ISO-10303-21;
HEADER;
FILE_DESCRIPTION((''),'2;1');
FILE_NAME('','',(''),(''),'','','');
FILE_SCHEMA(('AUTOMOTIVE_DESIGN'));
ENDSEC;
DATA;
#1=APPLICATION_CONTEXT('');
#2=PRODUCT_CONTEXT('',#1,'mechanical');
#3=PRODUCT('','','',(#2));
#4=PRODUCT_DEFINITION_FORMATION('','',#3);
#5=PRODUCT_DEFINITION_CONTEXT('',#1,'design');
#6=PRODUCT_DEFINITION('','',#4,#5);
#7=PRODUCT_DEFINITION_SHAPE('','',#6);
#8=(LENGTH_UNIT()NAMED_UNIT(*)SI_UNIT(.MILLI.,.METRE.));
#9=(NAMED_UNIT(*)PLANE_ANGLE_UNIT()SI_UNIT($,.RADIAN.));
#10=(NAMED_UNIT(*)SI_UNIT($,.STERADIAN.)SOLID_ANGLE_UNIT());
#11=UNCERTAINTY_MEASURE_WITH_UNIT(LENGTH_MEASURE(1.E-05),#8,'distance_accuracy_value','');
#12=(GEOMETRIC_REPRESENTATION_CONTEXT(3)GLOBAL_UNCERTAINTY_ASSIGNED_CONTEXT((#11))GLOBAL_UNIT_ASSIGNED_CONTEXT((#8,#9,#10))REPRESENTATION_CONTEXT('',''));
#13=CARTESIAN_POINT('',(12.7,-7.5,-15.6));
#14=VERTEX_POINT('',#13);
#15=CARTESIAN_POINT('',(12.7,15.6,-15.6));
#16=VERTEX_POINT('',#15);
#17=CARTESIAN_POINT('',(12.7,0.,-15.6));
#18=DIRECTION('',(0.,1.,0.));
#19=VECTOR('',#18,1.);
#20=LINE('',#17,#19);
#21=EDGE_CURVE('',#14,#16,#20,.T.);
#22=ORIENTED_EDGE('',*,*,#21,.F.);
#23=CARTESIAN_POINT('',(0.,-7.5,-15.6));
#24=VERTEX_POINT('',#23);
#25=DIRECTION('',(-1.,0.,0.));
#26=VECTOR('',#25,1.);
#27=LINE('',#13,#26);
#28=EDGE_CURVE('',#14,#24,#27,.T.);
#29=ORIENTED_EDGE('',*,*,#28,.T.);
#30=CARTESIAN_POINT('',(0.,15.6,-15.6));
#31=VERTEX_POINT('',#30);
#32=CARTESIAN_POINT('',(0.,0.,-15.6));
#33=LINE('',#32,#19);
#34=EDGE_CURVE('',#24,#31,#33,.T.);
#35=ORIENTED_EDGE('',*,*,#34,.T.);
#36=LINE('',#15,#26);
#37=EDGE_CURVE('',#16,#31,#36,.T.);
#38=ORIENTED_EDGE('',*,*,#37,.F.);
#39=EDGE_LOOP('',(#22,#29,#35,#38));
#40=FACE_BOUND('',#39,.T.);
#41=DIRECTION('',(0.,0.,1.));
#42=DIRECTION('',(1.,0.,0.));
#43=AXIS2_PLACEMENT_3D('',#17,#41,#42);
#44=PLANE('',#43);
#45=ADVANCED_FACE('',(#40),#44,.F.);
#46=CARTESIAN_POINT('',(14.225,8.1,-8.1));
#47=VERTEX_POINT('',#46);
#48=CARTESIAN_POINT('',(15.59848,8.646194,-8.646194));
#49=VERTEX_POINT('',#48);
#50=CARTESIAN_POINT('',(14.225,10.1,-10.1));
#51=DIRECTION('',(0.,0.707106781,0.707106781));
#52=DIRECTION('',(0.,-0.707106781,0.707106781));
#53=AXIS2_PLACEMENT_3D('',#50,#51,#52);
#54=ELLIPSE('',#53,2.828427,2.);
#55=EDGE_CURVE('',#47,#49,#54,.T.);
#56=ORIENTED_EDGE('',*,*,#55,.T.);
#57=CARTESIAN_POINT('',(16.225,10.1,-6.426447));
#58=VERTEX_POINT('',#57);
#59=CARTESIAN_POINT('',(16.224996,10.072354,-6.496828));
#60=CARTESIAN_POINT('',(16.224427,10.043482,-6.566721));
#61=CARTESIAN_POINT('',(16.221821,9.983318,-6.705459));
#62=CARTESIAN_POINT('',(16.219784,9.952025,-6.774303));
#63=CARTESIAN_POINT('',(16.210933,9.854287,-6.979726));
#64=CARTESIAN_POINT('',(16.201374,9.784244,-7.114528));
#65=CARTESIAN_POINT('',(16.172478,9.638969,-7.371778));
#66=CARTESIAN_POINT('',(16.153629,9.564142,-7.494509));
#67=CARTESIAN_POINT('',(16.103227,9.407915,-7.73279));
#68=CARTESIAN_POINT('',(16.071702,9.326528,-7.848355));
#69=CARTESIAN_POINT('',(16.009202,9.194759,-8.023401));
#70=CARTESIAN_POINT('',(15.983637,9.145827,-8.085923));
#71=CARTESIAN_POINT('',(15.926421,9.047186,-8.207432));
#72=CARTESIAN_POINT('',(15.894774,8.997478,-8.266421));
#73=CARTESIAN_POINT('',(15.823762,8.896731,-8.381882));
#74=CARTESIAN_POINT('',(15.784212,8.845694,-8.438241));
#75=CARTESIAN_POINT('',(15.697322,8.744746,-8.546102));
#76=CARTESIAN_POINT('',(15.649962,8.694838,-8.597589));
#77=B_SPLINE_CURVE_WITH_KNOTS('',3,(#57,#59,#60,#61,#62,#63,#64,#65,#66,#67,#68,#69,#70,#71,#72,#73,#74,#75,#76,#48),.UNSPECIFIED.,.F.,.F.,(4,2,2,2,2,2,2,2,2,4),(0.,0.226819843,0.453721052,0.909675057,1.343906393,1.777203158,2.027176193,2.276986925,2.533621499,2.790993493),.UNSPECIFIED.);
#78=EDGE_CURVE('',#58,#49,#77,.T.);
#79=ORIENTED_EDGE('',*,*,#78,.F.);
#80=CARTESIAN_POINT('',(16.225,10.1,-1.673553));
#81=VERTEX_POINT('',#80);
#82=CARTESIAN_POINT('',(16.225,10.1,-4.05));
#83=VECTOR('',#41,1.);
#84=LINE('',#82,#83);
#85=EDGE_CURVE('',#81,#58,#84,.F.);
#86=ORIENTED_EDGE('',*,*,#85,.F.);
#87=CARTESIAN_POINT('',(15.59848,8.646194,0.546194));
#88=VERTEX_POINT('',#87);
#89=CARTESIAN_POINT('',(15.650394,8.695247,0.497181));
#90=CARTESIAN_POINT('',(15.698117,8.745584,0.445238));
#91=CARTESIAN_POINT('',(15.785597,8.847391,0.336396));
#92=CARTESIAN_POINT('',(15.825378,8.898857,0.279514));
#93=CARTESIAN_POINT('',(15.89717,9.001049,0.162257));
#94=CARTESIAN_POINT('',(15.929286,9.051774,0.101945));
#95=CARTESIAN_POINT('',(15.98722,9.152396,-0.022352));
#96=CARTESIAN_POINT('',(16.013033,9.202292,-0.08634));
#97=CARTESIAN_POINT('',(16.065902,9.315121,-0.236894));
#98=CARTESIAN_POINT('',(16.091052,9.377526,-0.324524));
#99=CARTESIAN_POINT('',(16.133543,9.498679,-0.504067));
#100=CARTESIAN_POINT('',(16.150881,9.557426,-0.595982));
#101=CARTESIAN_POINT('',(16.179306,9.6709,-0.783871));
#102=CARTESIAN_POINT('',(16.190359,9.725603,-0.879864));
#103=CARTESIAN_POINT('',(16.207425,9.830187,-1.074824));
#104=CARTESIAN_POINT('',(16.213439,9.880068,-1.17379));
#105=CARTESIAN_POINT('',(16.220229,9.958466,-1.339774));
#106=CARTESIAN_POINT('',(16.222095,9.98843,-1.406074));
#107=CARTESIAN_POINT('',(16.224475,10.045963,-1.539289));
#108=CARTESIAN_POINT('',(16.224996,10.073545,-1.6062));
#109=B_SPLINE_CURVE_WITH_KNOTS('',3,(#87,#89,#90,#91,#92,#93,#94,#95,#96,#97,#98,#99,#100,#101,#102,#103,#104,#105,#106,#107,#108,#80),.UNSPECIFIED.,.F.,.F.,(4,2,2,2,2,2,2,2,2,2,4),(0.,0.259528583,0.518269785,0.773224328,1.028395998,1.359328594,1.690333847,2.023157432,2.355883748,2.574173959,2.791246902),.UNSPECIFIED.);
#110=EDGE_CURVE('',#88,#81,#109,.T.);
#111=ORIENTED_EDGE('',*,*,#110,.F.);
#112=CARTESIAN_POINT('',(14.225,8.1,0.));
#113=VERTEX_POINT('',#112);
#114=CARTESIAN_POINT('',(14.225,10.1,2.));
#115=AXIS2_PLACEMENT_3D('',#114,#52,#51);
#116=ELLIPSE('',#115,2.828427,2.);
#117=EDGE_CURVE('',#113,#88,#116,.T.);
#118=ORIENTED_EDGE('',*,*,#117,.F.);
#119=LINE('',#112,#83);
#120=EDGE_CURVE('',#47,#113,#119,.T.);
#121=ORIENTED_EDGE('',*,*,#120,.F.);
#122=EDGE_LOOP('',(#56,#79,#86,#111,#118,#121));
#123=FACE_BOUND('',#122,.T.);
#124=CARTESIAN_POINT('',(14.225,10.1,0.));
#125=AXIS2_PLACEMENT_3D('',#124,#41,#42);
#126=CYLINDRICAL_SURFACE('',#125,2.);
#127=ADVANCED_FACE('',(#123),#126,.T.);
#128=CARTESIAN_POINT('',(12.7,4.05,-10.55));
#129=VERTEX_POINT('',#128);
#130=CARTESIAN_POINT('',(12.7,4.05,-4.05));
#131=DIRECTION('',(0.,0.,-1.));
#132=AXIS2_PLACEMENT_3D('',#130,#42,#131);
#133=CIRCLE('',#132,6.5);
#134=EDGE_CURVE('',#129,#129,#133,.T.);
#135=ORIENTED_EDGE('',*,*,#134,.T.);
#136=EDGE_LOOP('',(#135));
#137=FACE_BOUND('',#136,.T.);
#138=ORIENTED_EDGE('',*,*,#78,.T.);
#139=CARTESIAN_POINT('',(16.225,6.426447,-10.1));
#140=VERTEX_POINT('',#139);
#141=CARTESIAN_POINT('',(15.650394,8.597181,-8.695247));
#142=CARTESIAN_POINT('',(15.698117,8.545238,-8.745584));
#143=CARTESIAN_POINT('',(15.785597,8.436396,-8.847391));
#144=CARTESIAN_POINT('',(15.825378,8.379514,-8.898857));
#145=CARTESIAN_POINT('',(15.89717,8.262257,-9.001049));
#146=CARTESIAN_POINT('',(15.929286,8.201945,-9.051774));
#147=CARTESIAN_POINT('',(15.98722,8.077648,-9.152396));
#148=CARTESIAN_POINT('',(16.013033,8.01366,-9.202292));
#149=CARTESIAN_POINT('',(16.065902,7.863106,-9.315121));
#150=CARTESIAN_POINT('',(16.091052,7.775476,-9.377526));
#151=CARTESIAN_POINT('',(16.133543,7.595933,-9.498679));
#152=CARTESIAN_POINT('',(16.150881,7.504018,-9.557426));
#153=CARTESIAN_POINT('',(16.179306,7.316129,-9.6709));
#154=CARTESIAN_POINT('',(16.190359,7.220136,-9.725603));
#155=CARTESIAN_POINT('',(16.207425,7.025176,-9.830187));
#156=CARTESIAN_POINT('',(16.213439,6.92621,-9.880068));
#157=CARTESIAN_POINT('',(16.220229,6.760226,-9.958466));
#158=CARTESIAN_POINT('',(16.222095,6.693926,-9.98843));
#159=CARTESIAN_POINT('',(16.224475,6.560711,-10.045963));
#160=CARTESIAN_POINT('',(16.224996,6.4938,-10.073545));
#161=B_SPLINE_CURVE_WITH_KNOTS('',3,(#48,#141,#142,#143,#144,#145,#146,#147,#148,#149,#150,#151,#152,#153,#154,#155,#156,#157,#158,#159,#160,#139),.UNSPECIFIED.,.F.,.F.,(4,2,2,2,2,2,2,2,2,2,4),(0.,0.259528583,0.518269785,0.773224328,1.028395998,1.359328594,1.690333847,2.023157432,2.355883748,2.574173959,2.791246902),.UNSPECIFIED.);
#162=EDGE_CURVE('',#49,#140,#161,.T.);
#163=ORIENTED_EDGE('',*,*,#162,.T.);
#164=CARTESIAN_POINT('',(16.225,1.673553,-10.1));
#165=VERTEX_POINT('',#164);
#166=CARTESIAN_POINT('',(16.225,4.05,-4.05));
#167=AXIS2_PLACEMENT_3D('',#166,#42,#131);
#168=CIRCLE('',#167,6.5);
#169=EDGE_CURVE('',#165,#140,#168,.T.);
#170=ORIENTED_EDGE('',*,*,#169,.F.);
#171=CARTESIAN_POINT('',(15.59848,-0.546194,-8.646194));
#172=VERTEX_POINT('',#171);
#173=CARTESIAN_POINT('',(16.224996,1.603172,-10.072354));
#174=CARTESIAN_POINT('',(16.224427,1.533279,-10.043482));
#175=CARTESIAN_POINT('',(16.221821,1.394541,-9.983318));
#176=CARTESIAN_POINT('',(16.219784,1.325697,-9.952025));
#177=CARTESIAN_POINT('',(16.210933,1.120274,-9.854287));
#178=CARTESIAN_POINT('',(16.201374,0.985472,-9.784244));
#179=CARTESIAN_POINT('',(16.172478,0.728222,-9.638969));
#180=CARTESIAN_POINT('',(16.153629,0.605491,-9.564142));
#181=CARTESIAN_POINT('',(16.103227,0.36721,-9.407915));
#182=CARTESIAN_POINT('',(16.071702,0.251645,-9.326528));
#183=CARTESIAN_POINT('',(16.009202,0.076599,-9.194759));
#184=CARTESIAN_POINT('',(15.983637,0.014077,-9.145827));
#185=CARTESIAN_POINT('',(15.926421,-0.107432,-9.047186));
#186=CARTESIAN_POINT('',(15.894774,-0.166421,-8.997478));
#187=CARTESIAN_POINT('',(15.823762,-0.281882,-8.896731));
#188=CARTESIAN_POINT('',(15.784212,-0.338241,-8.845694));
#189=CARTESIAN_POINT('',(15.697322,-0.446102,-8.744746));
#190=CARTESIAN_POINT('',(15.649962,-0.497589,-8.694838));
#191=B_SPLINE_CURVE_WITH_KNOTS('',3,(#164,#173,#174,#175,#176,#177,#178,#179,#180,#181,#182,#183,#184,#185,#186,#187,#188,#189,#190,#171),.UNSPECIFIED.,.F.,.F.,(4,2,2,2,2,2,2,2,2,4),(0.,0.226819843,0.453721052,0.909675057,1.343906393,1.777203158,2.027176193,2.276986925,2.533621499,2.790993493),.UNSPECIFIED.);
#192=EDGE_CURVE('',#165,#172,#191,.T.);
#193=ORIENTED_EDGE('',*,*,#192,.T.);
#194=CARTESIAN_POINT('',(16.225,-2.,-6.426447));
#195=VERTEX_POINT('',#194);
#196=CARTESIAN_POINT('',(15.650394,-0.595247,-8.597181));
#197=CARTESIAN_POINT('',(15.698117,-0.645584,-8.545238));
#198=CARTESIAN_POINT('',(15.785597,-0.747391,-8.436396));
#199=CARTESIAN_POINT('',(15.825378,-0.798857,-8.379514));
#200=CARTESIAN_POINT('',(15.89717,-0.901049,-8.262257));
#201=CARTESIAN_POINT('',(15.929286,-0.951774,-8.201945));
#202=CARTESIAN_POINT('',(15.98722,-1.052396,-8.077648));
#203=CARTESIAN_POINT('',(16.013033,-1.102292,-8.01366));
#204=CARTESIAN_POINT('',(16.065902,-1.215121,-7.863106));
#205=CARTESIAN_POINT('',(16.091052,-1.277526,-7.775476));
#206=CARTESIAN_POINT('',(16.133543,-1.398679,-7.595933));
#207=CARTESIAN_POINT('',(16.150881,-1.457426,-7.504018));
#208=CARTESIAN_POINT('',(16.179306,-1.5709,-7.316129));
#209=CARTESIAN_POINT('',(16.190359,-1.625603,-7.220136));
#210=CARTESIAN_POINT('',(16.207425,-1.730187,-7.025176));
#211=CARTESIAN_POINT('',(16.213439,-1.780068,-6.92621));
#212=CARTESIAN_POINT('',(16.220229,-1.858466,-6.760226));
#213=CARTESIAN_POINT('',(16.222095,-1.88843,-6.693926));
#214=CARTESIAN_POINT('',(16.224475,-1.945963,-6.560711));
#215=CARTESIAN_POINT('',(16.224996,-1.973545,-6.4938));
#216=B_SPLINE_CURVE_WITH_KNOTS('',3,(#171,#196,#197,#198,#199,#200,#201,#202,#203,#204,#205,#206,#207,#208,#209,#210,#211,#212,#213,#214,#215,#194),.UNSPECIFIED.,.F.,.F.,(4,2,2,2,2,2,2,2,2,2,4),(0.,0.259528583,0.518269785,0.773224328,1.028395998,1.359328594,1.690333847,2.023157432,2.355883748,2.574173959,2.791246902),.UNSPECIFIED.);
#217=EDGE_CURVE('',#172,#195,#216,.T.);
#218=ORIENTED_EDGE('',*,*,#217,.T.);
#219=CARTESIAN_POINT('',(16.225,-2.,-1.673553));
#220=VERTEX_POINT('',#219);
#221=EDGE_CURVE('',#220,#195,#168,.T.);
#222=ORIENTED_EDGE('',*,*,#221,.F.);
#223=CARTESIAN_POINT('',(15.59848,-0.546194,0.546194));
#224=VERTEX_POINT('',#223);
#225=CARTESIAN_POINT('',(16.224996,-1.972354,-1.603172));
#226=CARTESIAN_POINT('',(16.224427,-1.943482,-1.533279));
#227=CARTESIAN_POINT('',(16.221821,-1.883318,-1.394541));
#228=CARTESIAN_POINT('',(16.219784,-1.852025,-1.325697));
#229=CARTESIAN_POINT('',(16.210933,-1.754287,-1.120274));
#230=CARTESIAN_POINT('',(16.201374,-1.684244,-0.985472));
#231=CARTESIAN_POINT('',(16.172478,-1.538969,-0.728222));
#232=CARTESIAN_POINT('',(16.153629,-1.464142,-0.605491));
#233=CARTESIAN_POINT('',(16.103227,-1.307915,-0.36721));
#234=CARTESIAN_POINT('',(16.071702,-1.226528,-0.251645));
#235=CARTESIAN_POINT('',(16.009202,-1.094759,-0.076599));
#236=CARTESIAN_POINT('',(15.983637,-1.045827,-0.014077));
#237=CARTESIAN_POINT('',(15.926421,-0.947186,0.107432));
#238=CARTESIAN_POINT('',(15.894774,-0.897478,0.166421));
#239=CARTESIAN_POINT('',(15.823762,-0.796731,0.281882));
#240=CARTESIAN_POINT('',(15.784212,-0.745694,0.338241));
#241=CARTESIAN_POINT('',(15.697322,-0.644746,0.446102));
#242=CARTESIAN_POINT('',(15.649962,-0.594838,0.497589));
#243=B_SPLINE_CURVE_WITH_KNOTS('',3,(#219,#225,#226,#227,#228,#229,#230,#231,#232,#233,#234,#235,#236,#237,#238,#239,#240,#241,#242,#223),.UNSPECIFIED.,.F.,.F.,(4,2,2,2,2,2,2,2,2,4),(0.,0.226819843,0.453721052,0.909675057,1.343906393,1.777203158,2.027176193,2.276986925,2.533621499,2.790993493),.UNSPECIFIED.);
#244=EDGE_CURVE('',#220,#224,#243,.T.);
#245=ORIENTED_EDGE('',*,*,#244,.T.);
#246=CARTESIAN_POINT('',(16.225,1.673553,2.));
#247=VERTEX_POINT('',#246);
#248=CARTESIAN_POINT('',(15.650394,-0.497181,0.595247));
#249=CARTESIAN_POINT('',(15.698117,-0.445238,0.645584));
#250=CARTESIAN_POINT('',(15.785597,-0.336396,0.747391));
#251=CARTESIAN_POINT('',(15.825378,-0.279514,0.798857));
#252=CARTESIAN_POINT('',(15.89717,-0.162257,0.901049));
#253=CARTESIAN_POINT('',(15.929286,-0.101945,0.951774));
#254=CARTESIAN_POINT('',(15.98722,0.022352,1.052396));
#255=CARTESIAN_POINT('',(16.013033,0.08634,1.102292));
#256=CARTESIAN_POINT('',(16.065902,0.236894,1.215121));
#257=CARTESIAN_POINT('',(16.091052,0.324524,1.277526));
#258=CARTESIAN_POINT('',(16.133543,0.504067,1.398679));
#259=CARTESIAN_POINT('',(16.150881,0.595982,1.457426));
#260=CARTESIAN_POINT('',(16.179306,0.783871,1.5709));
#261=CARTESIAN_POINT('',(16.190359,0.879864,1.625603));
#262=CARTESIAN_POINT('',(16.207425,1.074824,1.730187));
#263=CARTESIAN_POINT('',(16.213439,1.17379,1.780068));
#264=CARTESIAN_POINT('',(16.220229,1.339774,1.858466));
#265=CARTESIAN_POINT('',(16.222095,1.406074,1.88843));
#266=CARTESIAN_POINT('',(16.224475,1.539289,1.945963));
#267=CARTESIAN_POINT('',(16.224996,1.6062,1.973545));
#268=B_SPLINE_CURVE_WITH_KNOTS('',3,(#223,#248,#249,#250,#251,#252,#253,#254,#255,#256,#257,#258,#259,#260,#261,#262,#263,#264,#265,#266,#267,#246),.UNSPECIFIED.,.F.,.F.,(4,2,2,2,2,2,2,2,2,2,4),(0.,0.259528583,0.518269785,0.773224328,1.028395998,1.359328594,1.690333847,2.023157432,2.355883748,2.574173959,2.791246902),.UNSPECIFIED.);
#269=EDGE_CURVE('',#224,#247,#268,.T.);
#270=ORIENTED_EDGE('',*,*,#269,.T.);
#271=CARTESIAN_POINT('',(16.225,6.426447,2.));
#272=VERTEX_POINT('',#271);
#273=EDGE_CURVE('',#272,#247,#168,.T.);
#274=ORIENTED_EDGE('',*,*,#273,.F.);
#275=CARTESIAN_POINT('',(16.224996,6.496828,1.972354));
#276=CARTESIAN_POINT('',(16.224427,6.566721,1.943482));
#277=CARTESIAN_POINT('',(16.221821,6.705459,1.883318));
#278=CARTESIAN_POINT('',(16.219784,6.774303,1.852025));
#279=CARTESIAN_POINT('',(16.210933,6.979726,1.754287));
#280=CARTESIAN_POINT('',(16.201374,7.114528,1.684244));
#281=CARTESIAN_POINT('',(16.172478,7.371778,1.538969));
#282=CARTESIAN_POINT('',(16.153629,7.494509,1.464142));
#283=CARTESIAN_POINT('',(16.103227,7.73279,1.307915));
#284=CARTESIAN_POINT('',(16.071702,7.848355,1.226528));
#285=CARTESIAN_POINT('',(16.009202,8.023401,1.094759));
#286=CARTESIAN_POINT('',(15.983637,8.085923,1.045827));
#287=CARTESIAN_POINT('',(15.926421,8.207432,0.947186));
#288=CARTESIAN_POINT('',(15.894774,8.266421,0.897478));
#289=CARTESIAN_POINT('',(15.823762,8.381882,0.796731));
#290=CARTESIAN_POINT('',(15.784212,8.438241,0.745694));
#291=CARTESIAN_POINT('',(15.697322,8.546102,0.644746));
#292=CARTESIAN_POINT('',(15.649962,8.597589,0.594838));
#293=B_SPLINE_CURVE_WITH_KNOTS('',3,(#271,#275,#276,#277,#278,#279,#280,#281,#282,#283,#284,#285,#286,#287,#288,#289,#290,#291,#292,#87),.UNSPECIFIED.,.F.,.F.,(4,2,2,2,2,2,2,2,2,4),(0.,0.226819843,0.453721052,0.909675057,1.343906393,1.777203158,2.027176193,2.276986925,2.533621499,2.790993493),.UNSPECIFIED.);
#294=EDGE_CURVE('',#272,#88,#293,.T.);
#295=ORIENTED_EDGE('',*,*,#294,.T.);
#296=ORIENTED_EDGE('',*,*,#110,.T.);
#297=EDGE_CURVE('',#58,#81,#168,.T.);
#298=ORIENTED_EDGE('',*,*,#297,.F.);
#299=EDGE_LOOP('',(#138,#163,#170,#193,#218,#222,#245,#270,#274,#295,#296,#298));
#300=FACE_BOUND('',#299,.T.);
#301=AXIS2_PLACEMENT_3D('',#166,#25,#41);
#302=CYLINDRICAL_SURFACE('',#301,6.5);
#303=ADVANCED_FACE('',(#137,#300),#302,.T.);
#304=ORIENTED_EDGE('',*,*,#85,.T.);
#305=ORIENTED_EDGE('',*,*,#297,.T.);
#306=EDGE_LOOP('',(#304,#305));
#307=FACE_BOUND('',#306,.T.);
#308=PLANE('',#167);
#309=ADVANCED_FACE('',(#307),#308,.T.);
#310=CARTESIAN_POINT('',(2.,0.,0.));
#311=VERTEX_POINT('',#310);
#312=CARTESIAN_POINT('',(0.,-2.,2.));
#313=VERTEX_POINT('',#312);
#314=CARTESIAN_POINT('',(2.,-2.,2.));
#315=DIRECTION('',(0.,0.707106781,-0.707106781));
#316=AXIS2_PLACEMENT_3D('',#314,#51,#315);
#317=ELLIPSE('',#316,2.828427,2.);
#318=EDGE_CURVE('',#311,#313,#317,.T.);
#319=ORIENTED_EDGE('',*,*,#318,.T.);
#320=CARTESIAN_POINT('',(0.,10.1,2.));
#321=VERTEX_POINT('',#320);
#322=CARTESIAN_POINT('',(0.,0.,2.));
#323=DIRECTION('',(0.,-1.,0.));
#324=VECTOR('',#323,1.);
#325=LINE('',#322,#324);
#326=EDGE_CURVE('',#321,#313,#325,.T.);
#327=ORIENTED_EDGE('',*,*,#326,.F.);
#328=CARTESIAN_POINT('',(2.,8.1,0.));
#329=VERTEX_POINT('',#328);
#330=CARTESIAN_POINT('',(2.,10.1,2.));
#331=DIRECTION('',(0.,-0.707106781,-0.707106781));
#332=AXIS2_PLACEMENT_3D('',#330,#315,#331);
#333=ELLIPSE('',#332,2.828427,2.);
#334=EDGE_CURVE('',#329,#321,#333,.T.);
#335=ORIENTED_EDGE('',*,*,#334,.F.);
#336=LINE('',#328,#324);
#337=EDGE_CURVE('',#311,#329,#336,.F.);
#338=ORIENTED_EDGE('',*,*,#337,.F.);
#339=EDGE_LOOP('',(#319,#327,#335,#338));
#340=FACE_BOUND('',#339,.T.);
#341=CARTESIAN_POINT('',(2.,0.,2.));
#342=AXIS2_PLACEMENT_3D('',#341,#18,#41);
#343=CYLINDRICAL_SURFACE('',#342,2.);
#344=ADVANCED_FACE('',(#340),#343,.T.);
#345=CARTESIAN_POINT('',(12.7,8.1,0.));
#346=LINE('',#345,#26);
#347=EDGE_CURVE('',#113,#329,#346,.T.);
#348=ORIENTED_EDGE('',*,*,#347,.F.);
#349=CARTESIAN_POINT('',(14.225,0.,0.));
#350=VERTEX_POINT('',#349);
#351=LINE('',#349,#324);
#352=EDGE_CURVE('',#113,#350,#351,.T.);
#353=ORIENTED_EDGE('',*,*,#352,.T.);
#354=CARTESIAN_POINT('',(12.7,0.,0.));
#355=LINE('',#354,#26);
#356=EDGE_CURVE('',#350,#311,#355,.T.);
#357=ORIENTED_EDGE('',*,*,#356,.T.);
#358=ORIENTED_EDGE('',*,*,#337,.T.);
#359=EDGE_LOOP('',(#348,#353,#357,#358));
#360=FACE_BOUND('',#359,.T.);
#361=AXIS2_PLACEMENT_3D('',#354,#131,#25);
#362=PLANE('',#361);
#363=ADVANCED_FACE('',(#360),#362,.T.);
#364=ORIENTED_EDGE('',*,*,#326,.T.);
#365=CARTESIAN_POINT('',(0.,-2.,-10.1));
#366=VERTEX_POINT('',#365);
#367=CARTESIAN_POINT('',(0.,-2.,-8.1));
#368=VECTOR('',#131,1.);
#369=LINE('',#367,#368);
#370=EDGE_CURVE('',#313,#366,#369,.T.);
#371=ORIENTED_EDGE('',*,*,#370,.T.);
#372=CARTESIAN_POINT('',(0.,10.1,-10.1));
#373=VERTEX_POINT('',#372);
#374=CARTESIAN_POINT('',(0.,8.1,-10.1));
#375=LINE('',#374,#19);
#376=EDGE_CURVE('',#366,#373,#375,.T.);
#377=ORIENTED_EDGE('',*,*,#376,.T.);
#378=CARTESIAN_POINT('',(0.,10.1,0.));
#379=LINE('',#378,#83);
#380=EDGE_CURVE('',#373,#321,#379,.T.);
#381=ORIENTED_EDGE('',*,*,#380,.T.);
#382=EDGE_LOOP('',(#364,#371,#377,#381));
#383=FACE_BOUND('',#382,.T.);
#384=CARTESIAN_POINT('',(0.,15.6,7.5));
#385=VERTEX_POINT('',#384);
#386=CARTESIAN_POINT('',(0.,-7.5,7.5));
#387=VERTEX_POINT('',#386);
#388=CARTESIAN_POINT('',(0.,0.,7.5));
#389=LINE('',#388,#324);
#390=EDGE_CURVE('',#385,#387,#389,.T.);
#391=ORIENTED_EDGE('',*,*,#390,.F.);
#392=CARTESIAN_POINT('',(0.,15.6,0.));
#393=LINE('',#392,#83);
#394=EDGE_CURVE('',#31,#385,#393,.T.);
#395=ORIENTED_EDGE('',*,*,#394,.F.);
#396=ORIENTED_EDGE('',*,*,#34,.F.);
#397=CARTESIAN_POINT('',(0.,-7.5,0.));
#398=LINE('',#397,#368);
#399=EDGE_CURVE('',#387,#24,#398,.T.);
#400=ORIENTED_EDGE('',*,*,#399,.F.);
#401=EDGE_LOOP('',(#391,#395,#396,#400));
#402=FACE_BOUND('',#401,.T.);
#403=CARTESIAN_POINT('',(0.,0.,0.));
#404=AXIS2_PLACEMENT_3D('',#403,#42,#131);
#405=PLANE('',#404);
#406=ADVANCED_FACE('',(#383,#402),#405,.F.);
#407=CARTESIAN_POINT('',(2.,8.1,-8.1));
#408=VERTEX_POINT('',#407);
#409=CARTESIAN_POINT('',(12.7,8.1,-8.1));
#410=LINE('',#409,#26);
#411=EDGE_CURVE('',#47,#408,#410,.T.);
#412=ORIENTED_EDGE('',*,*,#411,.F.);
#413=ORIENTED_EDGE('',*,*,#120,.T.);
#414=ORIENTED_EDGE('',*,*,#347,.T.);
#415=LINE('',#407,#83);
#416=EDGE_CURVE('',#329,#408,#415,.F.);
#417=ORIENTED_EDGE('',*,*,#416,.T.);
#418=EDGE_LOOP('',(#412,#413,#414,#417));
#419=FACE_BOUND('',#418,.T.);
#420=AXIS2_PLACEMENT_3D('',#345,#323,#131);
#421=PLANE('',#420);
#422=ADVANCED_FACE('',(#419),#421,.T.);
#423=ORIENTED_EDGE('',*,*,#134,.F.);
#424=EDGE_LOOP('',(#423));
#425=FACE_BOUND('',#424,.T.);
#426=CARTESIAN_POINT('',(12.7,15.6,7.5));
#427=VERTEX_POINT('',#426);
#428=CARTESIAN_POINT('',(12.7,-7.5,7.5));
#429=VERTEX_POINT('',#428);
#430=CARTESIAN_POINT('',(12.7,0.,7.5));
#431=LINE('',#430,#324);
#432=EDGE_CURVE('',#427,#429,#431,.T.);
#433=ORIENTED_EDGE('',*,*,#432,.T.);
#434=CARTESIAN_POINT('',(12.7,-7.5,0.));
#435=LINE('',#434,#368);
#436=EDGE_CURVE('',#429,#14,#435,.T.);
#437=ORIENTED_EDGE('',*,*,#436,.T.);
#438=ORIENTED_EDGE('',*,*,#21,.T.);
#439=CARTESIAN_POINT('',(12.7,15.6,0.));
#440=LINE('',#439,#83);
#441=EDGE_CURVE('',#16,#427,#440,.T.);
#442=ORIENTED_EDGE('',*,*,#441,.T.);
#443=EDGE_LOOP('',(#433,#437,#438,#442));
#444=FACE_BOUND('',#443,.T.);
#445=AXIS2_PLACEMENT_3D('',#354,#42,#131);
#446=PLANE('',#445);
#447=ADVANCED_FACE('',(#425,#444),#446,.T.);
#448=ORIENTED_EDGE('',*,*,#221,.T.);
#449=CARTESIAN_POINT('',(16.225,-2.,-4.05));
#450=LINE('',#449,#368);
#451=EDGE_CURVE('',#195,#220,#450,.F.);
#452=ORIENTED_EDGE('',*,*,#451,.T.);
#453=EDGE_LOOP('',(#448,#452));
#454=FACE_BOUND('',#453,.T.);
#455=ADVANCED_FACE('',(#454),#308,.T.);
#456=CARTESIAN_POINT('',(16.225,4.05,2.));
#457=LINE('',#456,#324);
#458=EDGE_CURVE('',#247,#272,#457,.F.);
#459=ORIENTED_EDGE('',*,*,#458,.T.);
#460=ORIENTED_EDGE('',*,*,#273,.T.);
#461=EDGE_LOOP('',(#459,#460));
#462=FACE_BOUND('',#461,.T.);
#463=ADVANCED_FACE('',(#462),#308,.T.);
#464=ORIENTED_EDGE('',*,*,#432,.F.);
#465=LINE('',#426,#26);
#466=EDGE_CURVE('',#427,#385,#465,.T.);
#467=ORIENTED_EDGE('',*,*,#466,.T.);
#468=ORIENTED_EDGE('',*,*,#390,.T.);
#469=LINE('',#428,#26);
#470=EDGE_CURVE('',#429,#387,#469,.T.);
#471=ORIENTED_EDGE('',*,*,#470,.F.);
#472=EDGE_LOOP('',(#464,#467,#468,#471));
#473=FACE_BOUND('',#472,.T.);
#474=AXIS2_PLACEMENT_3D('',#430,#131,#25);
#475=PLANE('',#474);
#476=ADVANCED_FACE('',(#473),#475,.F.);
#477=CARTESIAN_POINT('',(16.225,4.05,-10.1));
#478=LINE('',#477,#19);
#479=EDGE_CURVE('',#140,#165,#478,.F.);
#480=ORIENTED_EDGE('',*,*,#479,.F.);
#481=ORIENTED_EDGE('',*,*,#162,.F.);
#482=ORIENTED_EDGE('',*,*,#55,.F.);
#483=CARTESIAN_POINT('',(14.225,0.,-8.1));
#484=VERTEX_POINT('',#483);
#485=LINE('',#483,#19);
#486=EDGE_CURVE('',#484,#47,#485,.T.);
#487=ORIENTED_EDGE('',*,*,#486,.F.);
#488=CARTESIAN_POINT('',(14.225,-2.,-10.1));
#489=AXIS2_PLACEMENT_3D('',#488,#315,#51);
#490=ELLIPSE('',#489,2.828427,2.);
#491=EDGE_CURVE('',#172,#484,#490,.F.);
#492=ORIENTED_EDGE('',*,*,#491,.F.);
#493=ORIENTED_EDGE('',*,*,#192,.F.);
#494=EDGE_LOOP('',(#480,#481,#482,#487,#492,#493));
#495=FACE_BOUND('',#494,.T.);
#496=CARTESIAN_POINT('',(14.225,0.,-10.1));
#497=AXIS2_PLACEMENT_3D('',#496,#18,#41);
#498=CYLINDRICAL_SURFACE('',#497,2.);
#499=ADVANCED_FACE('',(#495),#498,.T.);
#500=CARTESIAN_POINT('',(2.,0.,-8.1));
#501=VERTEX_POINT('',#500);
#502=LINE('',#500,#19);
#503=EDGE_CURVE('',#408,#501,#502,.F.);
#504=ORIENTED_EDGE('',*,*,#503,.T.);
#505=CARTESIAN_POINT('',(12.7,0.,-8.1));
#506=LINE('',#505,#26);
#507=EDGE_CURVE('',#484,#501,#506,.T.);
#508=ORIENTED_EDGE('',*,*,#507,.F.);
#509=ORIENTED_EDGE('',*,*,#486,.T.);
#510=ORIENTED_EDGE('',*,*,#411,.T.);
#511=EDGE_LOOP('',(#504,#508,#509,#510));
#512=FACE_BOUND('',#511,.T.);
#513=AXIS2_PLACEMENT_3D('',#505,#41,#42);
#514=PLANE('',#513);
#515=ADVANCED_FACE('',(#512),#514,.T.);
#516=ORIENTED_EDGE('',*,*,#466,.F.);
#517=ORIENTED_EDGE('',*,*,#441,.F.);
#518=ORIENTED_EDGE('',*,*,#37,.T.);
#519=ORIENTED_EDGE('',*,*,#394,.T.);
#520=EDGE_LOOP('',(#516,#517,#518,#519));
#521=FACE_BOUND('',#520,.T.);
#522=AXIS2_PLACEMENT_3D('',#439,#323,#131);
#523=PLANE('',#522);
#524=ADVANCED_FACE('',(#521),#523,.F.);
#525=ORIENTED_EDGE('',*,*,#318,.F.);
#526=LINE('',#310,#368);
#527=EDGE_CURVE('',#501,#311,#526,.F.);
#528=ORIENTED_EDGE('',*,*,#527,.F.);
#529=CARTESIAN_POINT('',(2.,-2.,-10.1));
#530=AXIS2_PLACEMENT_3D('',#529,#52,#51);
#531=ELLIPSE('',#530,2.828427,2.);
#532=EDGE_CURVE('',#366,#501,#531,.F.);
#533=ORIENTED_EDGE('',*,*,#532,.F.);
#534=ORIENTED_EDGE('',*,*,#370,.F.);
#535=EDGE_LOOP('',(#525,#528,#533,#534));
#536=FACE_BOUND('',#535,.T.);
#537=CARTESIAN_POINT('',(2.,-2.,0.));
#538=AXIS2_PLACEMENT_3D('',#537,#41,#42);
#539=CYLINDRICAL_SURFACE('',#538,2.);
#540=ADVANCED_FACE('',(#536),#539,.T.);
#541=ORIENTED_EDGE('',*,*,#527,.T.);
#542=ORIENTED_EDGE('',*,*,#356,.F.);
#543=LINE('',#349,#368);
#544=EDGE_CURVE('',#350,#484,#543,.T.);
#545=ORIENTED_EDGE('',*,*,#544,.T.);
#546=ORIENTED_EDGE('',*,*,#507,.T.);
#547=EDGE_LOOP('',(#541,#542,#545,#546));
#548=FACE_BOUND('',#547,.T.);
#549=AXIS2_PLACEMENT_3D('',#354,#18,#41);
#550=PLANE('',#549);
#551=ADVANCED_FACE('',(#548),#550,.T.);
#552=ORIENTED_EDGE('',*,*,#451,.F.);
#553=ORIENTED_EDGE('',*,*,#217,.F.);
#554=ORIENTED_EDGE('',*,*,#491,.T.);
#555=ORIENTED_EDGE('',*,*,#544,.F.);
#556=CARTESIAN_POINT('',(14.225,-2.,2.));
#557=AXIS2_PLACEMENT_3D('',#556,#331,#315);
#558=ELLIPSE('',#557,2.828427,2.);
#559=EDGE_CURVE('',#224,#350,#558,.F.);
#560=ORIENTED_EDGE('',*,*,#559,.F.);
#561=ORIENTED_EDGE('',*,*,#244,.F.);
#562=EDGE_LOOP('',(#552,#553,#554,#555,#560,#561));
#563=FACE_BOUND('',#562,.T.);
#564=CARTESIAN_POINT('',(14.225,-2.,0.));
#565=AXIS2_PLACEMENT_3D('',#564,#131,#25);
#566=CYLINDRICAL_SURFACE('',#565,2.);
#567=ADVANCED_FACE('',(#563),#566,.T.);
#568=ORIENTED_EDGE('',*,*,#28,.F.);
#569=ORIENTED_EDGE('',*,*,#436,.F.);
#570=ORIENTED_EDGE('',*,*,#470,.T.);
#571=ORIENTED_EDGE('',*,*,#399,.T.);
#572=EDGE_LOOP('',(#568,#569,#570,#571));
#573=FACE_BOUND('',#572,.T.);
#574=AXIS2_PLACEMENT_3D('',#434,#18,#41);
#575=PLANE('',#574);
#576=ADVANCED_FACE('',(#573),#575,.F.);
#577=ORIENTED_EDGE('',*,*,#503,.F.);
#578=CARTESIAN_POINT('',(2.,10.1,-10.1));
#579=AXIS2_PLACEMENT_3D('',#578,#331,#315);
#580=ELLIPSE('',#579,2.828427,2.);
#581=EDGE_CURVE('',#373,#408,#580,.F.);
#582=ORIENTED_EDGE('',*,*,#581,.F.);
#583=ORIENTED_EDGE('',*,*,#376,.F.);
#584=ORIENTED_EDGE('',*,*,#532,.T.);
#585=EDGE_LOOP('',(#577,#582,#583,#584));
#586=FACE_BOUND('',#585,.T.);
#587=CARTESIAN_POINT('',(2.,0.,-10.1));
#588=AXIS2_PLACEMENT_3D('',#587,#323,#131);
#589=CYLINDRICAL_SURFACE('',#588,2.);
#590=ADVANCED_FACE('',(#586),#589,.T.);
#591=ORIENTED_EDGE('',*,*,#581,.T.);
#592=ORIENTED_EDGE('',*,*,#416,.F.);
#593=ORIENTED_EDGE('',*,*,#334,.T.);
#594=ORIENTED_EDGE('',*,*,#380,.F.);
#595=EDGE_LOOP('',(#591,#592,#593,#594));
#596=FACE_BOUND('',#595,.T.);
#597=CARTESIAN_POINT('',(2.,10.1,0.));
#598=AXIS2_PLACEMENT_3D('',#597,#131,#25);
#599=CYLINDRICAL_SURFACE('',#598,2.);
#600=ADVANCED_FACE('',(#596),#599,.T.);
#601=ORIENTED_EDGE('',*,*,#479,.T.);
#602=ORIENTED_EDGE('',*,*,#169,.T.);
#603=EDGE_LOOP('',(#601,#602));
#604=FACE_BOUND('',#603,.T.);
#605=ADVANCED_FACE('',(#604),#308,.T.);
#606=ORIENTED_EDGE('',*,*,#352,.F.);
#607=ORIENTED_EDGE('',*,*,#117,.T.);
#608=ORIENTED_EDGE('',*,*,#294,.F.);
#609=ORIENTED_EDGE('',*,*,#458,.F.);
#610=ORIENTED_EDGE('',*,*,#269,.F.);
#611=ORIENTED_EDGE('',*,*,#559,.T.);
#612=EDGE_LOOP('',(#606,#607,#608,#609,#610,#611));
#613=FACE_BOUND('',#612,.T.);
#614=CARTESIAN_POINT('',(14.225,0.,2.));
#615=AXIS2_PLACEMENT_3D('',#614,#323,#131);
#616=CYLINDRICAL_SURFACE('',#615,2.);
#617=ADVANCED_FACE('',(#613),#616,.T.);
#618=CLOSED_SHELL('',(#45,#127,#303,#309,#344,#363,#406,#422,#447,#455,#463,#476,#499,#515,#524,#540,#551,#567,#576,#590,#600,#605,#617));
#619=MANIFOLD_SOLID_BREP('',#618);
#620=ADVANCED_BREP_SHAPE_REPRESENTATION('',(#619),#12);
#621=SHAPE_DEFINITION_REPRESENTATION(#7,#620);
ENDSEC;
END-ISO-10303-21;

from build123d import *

# Parameters (mm, degrees)
SKETCH2_W           = 23.1
SKETCH2_H           = 23.1
SKETCH2_W_2         = 8.1
SKETCH2_H_2         = 8.1
EXTRUDE_THIN1_DEPTH = 12.7
SKETCH3_R           = 6.5
SKETCH3_W           = 8.1
SKETCH3_H           = 8.1
BOSS_EXTRUDE1_DEPTH = 3.525
FILLET1_R           = 2


with BuildPart() as part:
    # Sketch2 → Extrude-Thin1 (new body)
    with BuildSketch(Plane(origin=(0, 0, 0), x_dir=(0, 0, -1), z_dir=(1, 0, 0))):
        with Locations((4.05, 4.05)):
            Rectangle(SKETCH2_W, SKETCH2_H)
        with Locations((4.05, 4.05)):
            Rectangle(SKETCH2_W_2, SKETCH2_H_2, mode=Mode.SUBTRACT)
    extrude(amount=EXTRUDE_THIN1_DEPTH)

    # Sketch3 → Boss-Extrude1 (add)
    with BuildSketch(Plane(origin=(12.7, 0, 0), x_dir=(0, 0, -1), z_dir=(1, 0, 0))):
        with Locations((4.05, 4.05)):
            Circle(SKETCH3_R)
        with Locations((4.05, 4.05)):
            Rectangle(SKETCH3_W, SKETCH3_H, mode=Mode.SUBTRACT)
    extrude(amount=BOSS_EXTRUDE1_DEPTH)

    # Fillet1
    # the kernel refuses this fillet: 2 mm, written as the material it takes off along each edge
    with BuildSketch(Plane(origin=(0, 8.1, 0), x_dir=(1, 0, 0), z_dir=(0, -1, 0)), Plane(origin=(0, 0, 0), x_dir=(1, 0, 0), z_dir=(0, 0, -1)), Plane(origin=(0, 0, -8.1), x_dir=(1, 0, 0), z_dir=(0, 1, 0)), Plane(origin=(0, 8.1, -8.1), x_dir=(1, 0, 0), z_dir=(0, 0, 1))) as fillet1_piece_1:
        with BuildLine():
            CenterArc((FILLET1_R, FILLET1_R), FILLET1_R, 180, 90)
            Line((0, FILLET1_R), (-FILLET1_R * 0.02, FILLET1_R))
            Line((-FILLET1_R * 0.02, FILLET1_R), (-FILLET1_R * 0.02, -FILLET1_R * 0.02))
            Line((-FILLET1_R * 0.02, -FILLET1_R * 0.02), (FILLET1_R, -FILLET1_R * 0.02))
            Line((FILLET1_R, -FILLET1_R * 0.02), (FILLET1_R, 0))
        make_face()
    extrude(amount=8.1, mode=Mode.SUBTRACT)
    with BuildSketch(Plane(origin=(16.225, 0, -8.1), x_dir=(0, -1, 0), z_dir=(0, 0, 1)), Plane(origin=(16.225, 8.1, -8.1), x_dir=(0, 0, -1), z_dir=(0, -1, 0)), Plane(origin=(16.225, 8.1, 0), x_dir=(0, 1, 0), z_dir=(0, 0, -1)), Plane(origin=(16.225, 0, 0), x_dir=(0, 0, 1), z_dir=(0, 1, 0))) as fillet1_piece_2:
        with BuildLine():
            CenterArc((FILLET1_R, -FILLET1_R), FILLET1_R, 90, 90)
            Line((0, -FILLET1_R), (-FILLET1_R * 0.02, -FILLET1_R))
            Line((-FILLET1_R * 0.02, -FILLET1_R), (-FILLET1_R * 0.02, FILLET1_R * 0.02))
            Line((-FILLET1_R * 0.02, FILLET1_R * 0.02), (FILLET1_R, FILLET1_R * 0.02))
            Line((FILLET1_R, FILLET1_R * 0.02), (FILLET1_R, 0))
        make_face()
    extrude(amount=8.1, mode=Mode.SUBTRACT)
    with BuildSketch(Plane(origin=(0, 13.1, 0), x_dir=(1, 0, 0), z_dir=(0, -1, 0))) as fillet1_piece_3a_section:
        with BuildLine():
            CenterArc((FILLET1_R, FILLET1_R), FILLET1_R, 180, 90)
            Line((0, FILLET1_R), (-FILLET1_R * 0.02, FILLET1_R))
            Line((-FILLET1_R * 0.02, FILLET1_R), (-FILLET1_R * 0.02, -FILLET1_R * 0.02))
            Line((-FILLET1_R * 0.02, -FILLET1_R * 0.02), (FILLET1_R, -FILLET1_R * 0.02))
            Line((FILLET1_R, -FILLET1_R * 0.02), (FILLET1_R, 0))
        make_face()
    fillet1_piece_3a = extrude(amount=13.1, mode=Mode.PRIVATE)
    fillet1_piece_3a = split(fillet1_piece_3a, bisect_by=Plane(origin=(0.452790229, 8.1, 0.452790229), z_dir=(0, 1, 0)), keep=Keep.TOP, mode=Mode.PRIVATE)
    with BuildSketch(Plane(origin=(0, 8.1, -8.1), x_dir=(1, 0, 0), z_dir=(0, 0, 1))) as fillet1_piece_3b_section:
        with BuildLine():
            CenterArc((FILLET1_R, FILLET1_R), FILLET1_R, 180, 90)
            Line((0, FILLET1_R), (-FILLET1_R * 0.02, FILLET1_R))
            Line((-FILLET1_R * 0.02, FILLET1_R), (-FILLET1_R * 0.02, -FILLET1_R * 0.02))
            Line((-FILLET1_R * 0.02, -FILLET1_R * 0.02), (FILLET1_R, -FILLET1_R * 0.02))
            Line((FILLET1_R, -FILLET1_R * 0.02), (FILLET1_R, 0))
        make_face()
    fillet1_piece_3b = extrude(amount=13.1, mode=Mode.PRIVATE)
    fillet1_piece_3b = split(fillet1_piece_3b, bisect_by=Plane(origin=(0.452790229, 8.552790229, 0), z_dir=(0, 0, 1)), keep=Keep.TOP, mode=Mode.PRIVATE)
    fillet1_piece_3 = fillet1_piece_3a & fillet1_piece_3b
    add(fillet1_piece_3, mode=Mode.SUBTRACT)
    with BuildSketch(Plane(origin=(0, 8.1, 0), x_dir=(1, 0, 0), z_dir=(0, -1, 0))) as fillet1_piece_4a_section:
        with BuildLine():
            CenterArc((FILLET1_R, FILLET1_R), FILLET1_R, 180, 90)
            Line((0, FILLET1_R), (-FILLET1_R * 0.02, FILLET1_R))
            Line((-FILLET1_R * 0.02, FILLET1_R), (-FILLET1_R * 0.02, -FILLET1_R * 0.02))
            Line((-FILLET1_R * 0.02, -FILLET1_R * 0.02), (FILLET1_R, -FILLET1_R * 0.02))
            Line((FILLET1_R, -FILLET1_R * 0.02), (FILLET1_R, 0))
        make_face()
    fillet1_piece_4a = extrude(amount=13.1, mode=Mode.PRIVATE)
    fillet1_piece_4a = split(fillet1_piece_4a, bisect_by=Plane(origin=(0.452790229, 0, 0.452790229), z_dir=(0, -1, 0)), keep=Keep.TOP, mode=Mode.PRIVATE)
    with BuildSketch(Plane(origin=(0, 0, 5), x_dir=(1, 0, 0), z_dir=(0, 0, -1))) as fillet1_piece_4b_section:
        with BuildLine():
            CenterArc((FILLET1_R, FILLET1_R), FILLET1_R, 180, 90)
            Line((0, FILLET1_R), (-FILLET1_R * 0.02, FILLET1_R))
            Line((-FILLET1_R * 0.02, FILLET1_R), (-FILLET1_R * 0.02, -FILLET1_R * 0.02))
            Line((-FILLET1_R * 0.02, -FILLET1_R * 0.02), (FILLET1_R, -FILLET1_R * 0.02))
            Line((FILLET1_R, -FILLET1_R * 0.02), (FILLET1_R, 0))
        make_face()
    fillet1_piece_4b = extrude(amount=13.1, mode=Mode.PRIVATE)
    fillet1_piece_4b = split(fillet1_piece_4b, bisect_by=Plane(origin=(0.452790229, -0.452790229, 0), z_dir=(0, 0, 1)), keep=Keep.TOP, mode=Mode.PRIVATE)
    fillet1_piece_4 = fillet1_piece_4a & fillet1_piece_4b
    add(fillet1_piece_4, mode=Mode.SUBTRACT)
    with BuildSketch(Plane(origin=(0, 0, 0), x_dir=(1, 0, 0), z_dir=(0, 0, -1))) as fillet1_piece_5a_section:
        with BuildLine():
            CenterArc((FILLET1_R, FILLET1_R), FILLET1_R, 180, 90)
            Line((0, FILLET1_R), (-FILLET1_R * 0.02, FILLET1_R))
            Line((-FILLET1_R * 0.02, FILLET1_R), (-FILLET1_R * 0.02, -FILLET1_R * 0.02))
            Line((-FILLET1_R * 0.02, -FILLET1_R * 0.02), (FILLET1_R, -FILLET1_R * 0.02))
            Line((FILLET1_R, -FILLET1_R * 0.02), (FILLET1_R, 0))
        make_face()
    fillet1_piece_5a = extrude(amount=13.1, mode=Mode.PRIVATE)
    fillet1_piece_5a = split(fillet1_piece_5a, bisect_by=Plane(origin=(0.452790229, -0.452790229, -8.1), z_dir=(0, 0, -1)), keep=Keep.TOP, mode=Mode.PRIVATE)
    with BuildSketch(Plane(origin=(0, -5, -8.1), x_dir=(1, 0, 0), z_dir=(0, 1, 0))) as fillet1_piece_5b_section:
        with BuildLine():
            CenterArc((FILLET1_R, FILLET1_R), FILLET1_R, 180, 90)
            Line((0, FILLET1_R), (-FILLET1_R * 0.02, FILLET1_R))
            Line((-FILLET1_R * 0.02, FILLET1_R), (-FILLET1_R * 0.02, -FILLET1_R * 0.02))
            Line((-FILLET1_R * 0.02, -FILLET1_R * 0.02), (FILLET1_R, -FILLET1_R * 0.02))
            Line((FILLET1_R, -FILLET1_R * 0.02), (FILLET1_R, 0))
        make_face()
    fillet1_piece_5b = extrude(amount=13.1, mode=Mode.PRIVATE)
    fillet1_piece_5b = split(fillet1_piece_5b, bisect_by=Plane(origin=(0.452790229, 0, -8.552790229), z_dir=(0, -1, 0)), keep=Keep.TOP, mode=Mode.PRIVATE)
    fillet1_piece_5 = fillet1_piece_5a & fillet1_piece_5b
    add(fillet1_piece_5, mode=Mode.SUBTRACT)
    with BuildSketch(Plane(origin=(0, 0, -8.1), x_dir=(1, 0, 0), z_dir=(0, 1, 0))) as fillet1_piece_6a_section:
        with BuildLine():
            CenterArc((FILLET1_R, FILLET1_R), FILLET1_R, 180, 90)
            Line((0, FILLET1_R), (-FILLET1_R * 0.02, FILLET1_R))
            Line((-FILLET1_R * 0.02, FILLET1_R), (-FILLET1_R * 0.02, -FILLET1_R * 0.02))
            Line((-FILLET1_R * 0.02, -FILLET1_R * 0.02), (FILLET1_R, -FILLET1_R * 0.02))
            Line((FILLET1_R, -FILLET1_R * 0.02), (FILLET1_R, 0))
        make_face()
    fillet1_piece_6a = extrude(amount=13.1, mode=Mode.PRIVATE)
    fillet1_piece_6a = split(fillet1_piece_6a, bisect_by=Plane(origin=(0.452790229, 8.1, -8.552790229), z_dir=(0, 1, 0)), keep=Keep.TOP, mode=Mode.PRIVATE)
    with BuildSketch(Plane(origin=(0, 8.1, -13.1), x_dir=(1, 0, 0), z_dir=(0, 0, 1))) as fillet1_piece_6b_section:
        with BuildLine():
            CenterArc((FILLET1_R, FILLET1_R), FILLET1_R, 180, 90)
            Line((0, FILLET1_R), (-FILLET1_R * 0.02, FILLET1_R))
            Line((-FILLET1_R * 0.02, FILLET1_R), (-FILLET1_R * 0.02, -FILLET1_R * 0.02))
            Line((-FILLET1_R * 0.02, -FILLET1_R * 0.02), (FILLET1_R, -FILLET1_R * 0.02))
            Line((FILLET1_R, -FILLET1_R * 0.02), (FILLET1_R, 0))
        make_face()
    fillet1_piece_6b = extrude(amount=13.1, mode=Mode.PRIVATE)
    fillet1_piece_6b = split(fillet1_piece_6b, bisect_by=Plane(origin=(0.452790229, 8.552790229, -8.1), z_dir=(0, 0, -1)), keep=Keep.TOP, mode=Mode.PRIVATE)
    fillet1_piece_6 = fillet1_piece_6a & fillet1_piece_6b
    add(fillet1_piece_6, mode=Mode.SUBTRACT)
    with BuildSketch(Plane(origin=(16.225, 8.1, -8.1), x_dir=(0, 0, -1), z_dir=(0, -1, 0))) as fillet1_piece_7a_section:
        with BuildLine():
            CenterArc((FILLET1_R, -FILLET1_R), FILLET1_R, 90, 90)
            Line((0, -FILLET1_R), (-FILLET1_R * 0.02, -FILLET1_R))
            Line((-FILLET1_R * 0.02, -FILLET1_R), (-FILLET1_R * 0.02, FILLET1_R * 0.02))
            Line((-FILLET1_R * 0.02, FILLET1_R * 0.02), (FILLET1_R, FILLET1_R * 0.02))
            Line((FILLET1_R, FILLET1_R * 0.02), (FILLET1_R, 0))
        make_face()
    fillet1_piece_7a = extrude(amount=13.1, mode=Mode.PRIVATE)
    fillet1_piece_7a = split(fillet1_piece_7a, bisect_by=Plane(origin=(15.772209771, 0, -8.552790229), z_dir=(0, -1, 0)), keep=Keep.TOP, mode=Mode.PRIVATE)
    with BuildSketch(Plane(origin=(16.225, 0, -13.1), x_dir=(0, -1, 0), z_dir=(0, 0, 1))) as fillet1_piece_7b_section:
        with BuildLine():
            CenterArc((FILLET1_R, -FILLET1_R), FILLET1_R, 90, 90)
            Line((0, -FILLET1_R), (-FILLET1_R * 0.02, -FILLET1_R))
            Line((-FILLET1_R * 0.02, -FILLET1_R), (-FILLET1_R * 0.02, FILLET1_R * 0.02))
            Line((-FILLET1_R * 0.02, FILLET1_R * 0.02), (FILLET1_R, FILLET1_R * 0.02))
            Line((FILLET1_R, FILLET1_R * 0.02), (FILLET1_R, 0))
        make_face()
    fillet1_piece_7b = extrude(amount=13.1, mode=Mode.PRIVATE)
    fillet1_piece_7b = split(fillet1_piece_7b, bisect_by=Plane(origin=(15.772209771, -0.452790229, -8.1), z_dir=(0, 0, -1)), keep=Keep.TOP, mode=Mode.PRIVATE)
    fillet1_piece_7 = fillet1_piece_7a & fillet1_piece_7b
    add(fillet1_piece_7, mode=Mode.SUBTRACT)
    with BuildSketch(Plane(origin=(16.225, 0, -8.1), x_dir=(0, -1, 0), z_dir=(0, 0, 1))) as fillet1_piece_8a_section:
        with BuildLine():
            CenterArc((FILLET1_R, -FILLET1_R), FILLET1_R, 90, 90)
            Line((0, -FILLET1_R), (-FILLET1_R * 0.02, -FILLET1_R))
            Line((-FILLET1_R * 0.02, -FILLET1_R), (-FILLET1_R * 0.02, FILLET1_R * 0.02))
            Line((-FILLET1_R * 0.02, FILLET1_R * 0.02), (FILLET1_R, FILLET1_R * 0.02))
            Line((FILLET1_R, FILLET1_R * 0.02), (FILLET1_R, 0))
        make_face()
    fillet1_piece_8a = extrude(amount=13.1, mode=Mode.PRIVATE)
    fillet1_piece_8a = split(fillet1_piece_8a, bisect_by=Plane(origin=(15.772209771, -0.452790229, 0), z_dir=(0, 0, 1)), keep=Keep.TOP, mode=Mode.PRIVATE)
    with BuildSketch(Plane(origin=(16.225, -5, 0), x_dir=(0, 0, 1), z_dir=(0, 1, 0))) as fillet1_piece_8b_section:
        with BuildLine():
            CenterArc((FILLET1_R, -FILLET1_R), FILLET1_R, 90, 90)
            Line((0, -FILLET1_R), (-FILLET1_R * 0.02, -FILLET1_R))
            Line((-FILLET1_R * 0.02, -FILLET1_R), (-FILLET1_R * 0.02, FILLET1_R * 0.02))
            Line((-FILLET1_R * 0.02, FILLET1_R * 0.02), (FILLET1_R, FILLET1_R * 0.02))
            Line((FILLET1_R, FILLET1_R * 0.02), (FILLET1_R, 0))
        make_face()
    fillet1_piece_8b = extrude(amount=13.1, mode=Mode.PRIVATE)
    fillet1_piece_8b = split(fillet1_piece_8b, bisect_by=Plane(origin=(15.772209771, 0, 0.452790229), z_dir=(0, -1, 0)), keep=Keep.TOP, mode=Mode.PRIVATE)
    fillet1_piece_8 = fillet1_piece_8a & fillet1_piece_8b
    add(fillet1_piece_8, mode=Mode.SUBTRACT)
    with BuildSketch(Plane(origin=(16.225, 8.1, 0), x_dir=(0, 1, 0), z_dir=(0, 0, -1))) as fillet1_piece_9a_section:
        with BuildLine():
            CenterArc((FILLET1_R, -FILLET1_R), FILLET1_R, 90, 90)
            Line((0, -FILLET1_R), (-FILLET1_R * 0.02, -FILLET1_R))
            Line((-FILLET1_R * 0.02, -FILLET1_R), (-FILLET1_R * 0.02, FILLET1_R * 0.02))
            Line((-FILLET1_R * 0.02, FILLET1_R * 0.02), (FILLET1_R, FILLET1_R * 0.02))
            Line((FILLET1_R, FILLET1_R * 0.02), (FILLET1_R, 0))
        make_face()
    fillet1_piece_9a = extrude(amount=13.1, mode=Mode.PRIVATE)
    fillet1_piece_9a = split(fillet1_piece_9a, bisect_by=Plane(origin=(15.772209771, 8.552790229, -8.1), z_dir=(0, 0, -1)), keep=Keep.TOP, mode=Mode.PRIVATE)
    with BuildSketch(Plane(origin=(16.225, 13.1, -8.1), x_dir=(0, 0, -1), z_dir=(0, -1, 0))) as fillet1_piece_9b_section:
        with BuildLine():
            CenterArc((FILLET1_R, -FILLET1_R), FILLET1_R, 90, 90)
            Line((0, -FILLET1_R), (-FILLET1_R * 0.02, -FILLET1_R))
            Line((-FILLET1_R * 0.02, -FILLET1_R), (-FILLET1_R * 0.02, FILLET1_R * 0.02))
            Line((-FILLET1_R * 0.02, FILLET1_R * 0.02), (FILLET1_R, FILLET1_R * 0.02))
            Line((FILLET1_R, FILLET1_R * 0.02), (FILLET1_R, 0))
        make_face()
    fillet1_piece_9b = extrude(amount=13.1, mode=Mode.PRIVATE)
    fillet1_piece_9b = split(fillet1_piece_9b, bisect_by=Plane(origin=(15.772209771, 8.1, -8.552790229), z_dir=(0, 1, 0)), keep=Keep.TOP, mode=Mode.PRIVATE)
    fillet1_piece_9 = fillet1_piece_9a & fillet1_piece_9b
    add(fillet1_piece_9, mode=Mode.SUBTRACT)
    with BuildSketch(Plane(origin=(16.225, 8.1, 5), x_dir=(0, 1, 0), z_dir=(0, 0, -1))) as fillet1_piece_10a_section:
        with BuildLine():
            CenterArc((FILLET1_R, -FILLET1_R), FILLET1_R, 90, 90)
            Line((0, -FILLET1_R), (-FILLET1_R * 0.02, -FILLET1_R))
            Line((-FILLET1_R * 0.02, -FILLET1_R), (-FILLET1_R * 0.02, FILLET1_R * 0.02))
            Line((-FILLET1_R * 0.02, FILLET1_R * 0.02), (FILLET1_R, FILLET1_R * 0.02))
            Line((FILLET1_R, FILLET1_R * 0.02), (FILLET1_R, 0))
        make_face()
    fillet1_piece_10a = extrude(amount=13.1, mode=Mode.PRIVATE)
    fillet1_piece_10a = split(fillet1_piece_10a, bisect_by=Plane(origin=(15.772209771, 8.552790229, 0), z_dir=(0, 0, 1)), keep=Keep.TOP, mode=Mode.PRIVATE)
    with BuildSketch(Plane(origin=(16.225, 0, 0), x_dir=(0, 0, 1), z_dir=(0, 1, 0))) as fillet1_piece_10b_section:
        with BuildLine():
            CenterArc((FILLET1_R, -FILLET1_R), FILLET1_R, 90, 90)
            Line((0, -FILLET1_R), (-FILLET1_R * 0.02, -FILLET1_R))
            Line((-FILLET1_R * 0.02, -FILLET1_R), (-FILLET1_R * 0.02, FILLET1_R * 0.02))
            Line((-FILLET1_R * 0.02, FILLET1_R * 0.02), (FILLET1_R, FILLET1_R * 0.02))
            Line((FILLET1_R, FILLET1_R * 0.02), (FILLET1_R, 0))
        make_face()
    fillet1_piece_10b = extrude(amount=13.1, mode=Mode.PRIVATE)
    fillet1_piece_10b = split(fillet1_piece_10b, bisect_by=Plane(origin=(15.772209771, 8.1, 0.452790229), z_dir=(0, 1, 0)), keep=Keep.TOP, mode=Mode.PRIVATE)
    fillet1_piece_10 = fillet1_piece_10a & fillet1_piece_10b
    add(fillet1_piece_10, mode=Mode.SUBTRACT)


solid = part.part
